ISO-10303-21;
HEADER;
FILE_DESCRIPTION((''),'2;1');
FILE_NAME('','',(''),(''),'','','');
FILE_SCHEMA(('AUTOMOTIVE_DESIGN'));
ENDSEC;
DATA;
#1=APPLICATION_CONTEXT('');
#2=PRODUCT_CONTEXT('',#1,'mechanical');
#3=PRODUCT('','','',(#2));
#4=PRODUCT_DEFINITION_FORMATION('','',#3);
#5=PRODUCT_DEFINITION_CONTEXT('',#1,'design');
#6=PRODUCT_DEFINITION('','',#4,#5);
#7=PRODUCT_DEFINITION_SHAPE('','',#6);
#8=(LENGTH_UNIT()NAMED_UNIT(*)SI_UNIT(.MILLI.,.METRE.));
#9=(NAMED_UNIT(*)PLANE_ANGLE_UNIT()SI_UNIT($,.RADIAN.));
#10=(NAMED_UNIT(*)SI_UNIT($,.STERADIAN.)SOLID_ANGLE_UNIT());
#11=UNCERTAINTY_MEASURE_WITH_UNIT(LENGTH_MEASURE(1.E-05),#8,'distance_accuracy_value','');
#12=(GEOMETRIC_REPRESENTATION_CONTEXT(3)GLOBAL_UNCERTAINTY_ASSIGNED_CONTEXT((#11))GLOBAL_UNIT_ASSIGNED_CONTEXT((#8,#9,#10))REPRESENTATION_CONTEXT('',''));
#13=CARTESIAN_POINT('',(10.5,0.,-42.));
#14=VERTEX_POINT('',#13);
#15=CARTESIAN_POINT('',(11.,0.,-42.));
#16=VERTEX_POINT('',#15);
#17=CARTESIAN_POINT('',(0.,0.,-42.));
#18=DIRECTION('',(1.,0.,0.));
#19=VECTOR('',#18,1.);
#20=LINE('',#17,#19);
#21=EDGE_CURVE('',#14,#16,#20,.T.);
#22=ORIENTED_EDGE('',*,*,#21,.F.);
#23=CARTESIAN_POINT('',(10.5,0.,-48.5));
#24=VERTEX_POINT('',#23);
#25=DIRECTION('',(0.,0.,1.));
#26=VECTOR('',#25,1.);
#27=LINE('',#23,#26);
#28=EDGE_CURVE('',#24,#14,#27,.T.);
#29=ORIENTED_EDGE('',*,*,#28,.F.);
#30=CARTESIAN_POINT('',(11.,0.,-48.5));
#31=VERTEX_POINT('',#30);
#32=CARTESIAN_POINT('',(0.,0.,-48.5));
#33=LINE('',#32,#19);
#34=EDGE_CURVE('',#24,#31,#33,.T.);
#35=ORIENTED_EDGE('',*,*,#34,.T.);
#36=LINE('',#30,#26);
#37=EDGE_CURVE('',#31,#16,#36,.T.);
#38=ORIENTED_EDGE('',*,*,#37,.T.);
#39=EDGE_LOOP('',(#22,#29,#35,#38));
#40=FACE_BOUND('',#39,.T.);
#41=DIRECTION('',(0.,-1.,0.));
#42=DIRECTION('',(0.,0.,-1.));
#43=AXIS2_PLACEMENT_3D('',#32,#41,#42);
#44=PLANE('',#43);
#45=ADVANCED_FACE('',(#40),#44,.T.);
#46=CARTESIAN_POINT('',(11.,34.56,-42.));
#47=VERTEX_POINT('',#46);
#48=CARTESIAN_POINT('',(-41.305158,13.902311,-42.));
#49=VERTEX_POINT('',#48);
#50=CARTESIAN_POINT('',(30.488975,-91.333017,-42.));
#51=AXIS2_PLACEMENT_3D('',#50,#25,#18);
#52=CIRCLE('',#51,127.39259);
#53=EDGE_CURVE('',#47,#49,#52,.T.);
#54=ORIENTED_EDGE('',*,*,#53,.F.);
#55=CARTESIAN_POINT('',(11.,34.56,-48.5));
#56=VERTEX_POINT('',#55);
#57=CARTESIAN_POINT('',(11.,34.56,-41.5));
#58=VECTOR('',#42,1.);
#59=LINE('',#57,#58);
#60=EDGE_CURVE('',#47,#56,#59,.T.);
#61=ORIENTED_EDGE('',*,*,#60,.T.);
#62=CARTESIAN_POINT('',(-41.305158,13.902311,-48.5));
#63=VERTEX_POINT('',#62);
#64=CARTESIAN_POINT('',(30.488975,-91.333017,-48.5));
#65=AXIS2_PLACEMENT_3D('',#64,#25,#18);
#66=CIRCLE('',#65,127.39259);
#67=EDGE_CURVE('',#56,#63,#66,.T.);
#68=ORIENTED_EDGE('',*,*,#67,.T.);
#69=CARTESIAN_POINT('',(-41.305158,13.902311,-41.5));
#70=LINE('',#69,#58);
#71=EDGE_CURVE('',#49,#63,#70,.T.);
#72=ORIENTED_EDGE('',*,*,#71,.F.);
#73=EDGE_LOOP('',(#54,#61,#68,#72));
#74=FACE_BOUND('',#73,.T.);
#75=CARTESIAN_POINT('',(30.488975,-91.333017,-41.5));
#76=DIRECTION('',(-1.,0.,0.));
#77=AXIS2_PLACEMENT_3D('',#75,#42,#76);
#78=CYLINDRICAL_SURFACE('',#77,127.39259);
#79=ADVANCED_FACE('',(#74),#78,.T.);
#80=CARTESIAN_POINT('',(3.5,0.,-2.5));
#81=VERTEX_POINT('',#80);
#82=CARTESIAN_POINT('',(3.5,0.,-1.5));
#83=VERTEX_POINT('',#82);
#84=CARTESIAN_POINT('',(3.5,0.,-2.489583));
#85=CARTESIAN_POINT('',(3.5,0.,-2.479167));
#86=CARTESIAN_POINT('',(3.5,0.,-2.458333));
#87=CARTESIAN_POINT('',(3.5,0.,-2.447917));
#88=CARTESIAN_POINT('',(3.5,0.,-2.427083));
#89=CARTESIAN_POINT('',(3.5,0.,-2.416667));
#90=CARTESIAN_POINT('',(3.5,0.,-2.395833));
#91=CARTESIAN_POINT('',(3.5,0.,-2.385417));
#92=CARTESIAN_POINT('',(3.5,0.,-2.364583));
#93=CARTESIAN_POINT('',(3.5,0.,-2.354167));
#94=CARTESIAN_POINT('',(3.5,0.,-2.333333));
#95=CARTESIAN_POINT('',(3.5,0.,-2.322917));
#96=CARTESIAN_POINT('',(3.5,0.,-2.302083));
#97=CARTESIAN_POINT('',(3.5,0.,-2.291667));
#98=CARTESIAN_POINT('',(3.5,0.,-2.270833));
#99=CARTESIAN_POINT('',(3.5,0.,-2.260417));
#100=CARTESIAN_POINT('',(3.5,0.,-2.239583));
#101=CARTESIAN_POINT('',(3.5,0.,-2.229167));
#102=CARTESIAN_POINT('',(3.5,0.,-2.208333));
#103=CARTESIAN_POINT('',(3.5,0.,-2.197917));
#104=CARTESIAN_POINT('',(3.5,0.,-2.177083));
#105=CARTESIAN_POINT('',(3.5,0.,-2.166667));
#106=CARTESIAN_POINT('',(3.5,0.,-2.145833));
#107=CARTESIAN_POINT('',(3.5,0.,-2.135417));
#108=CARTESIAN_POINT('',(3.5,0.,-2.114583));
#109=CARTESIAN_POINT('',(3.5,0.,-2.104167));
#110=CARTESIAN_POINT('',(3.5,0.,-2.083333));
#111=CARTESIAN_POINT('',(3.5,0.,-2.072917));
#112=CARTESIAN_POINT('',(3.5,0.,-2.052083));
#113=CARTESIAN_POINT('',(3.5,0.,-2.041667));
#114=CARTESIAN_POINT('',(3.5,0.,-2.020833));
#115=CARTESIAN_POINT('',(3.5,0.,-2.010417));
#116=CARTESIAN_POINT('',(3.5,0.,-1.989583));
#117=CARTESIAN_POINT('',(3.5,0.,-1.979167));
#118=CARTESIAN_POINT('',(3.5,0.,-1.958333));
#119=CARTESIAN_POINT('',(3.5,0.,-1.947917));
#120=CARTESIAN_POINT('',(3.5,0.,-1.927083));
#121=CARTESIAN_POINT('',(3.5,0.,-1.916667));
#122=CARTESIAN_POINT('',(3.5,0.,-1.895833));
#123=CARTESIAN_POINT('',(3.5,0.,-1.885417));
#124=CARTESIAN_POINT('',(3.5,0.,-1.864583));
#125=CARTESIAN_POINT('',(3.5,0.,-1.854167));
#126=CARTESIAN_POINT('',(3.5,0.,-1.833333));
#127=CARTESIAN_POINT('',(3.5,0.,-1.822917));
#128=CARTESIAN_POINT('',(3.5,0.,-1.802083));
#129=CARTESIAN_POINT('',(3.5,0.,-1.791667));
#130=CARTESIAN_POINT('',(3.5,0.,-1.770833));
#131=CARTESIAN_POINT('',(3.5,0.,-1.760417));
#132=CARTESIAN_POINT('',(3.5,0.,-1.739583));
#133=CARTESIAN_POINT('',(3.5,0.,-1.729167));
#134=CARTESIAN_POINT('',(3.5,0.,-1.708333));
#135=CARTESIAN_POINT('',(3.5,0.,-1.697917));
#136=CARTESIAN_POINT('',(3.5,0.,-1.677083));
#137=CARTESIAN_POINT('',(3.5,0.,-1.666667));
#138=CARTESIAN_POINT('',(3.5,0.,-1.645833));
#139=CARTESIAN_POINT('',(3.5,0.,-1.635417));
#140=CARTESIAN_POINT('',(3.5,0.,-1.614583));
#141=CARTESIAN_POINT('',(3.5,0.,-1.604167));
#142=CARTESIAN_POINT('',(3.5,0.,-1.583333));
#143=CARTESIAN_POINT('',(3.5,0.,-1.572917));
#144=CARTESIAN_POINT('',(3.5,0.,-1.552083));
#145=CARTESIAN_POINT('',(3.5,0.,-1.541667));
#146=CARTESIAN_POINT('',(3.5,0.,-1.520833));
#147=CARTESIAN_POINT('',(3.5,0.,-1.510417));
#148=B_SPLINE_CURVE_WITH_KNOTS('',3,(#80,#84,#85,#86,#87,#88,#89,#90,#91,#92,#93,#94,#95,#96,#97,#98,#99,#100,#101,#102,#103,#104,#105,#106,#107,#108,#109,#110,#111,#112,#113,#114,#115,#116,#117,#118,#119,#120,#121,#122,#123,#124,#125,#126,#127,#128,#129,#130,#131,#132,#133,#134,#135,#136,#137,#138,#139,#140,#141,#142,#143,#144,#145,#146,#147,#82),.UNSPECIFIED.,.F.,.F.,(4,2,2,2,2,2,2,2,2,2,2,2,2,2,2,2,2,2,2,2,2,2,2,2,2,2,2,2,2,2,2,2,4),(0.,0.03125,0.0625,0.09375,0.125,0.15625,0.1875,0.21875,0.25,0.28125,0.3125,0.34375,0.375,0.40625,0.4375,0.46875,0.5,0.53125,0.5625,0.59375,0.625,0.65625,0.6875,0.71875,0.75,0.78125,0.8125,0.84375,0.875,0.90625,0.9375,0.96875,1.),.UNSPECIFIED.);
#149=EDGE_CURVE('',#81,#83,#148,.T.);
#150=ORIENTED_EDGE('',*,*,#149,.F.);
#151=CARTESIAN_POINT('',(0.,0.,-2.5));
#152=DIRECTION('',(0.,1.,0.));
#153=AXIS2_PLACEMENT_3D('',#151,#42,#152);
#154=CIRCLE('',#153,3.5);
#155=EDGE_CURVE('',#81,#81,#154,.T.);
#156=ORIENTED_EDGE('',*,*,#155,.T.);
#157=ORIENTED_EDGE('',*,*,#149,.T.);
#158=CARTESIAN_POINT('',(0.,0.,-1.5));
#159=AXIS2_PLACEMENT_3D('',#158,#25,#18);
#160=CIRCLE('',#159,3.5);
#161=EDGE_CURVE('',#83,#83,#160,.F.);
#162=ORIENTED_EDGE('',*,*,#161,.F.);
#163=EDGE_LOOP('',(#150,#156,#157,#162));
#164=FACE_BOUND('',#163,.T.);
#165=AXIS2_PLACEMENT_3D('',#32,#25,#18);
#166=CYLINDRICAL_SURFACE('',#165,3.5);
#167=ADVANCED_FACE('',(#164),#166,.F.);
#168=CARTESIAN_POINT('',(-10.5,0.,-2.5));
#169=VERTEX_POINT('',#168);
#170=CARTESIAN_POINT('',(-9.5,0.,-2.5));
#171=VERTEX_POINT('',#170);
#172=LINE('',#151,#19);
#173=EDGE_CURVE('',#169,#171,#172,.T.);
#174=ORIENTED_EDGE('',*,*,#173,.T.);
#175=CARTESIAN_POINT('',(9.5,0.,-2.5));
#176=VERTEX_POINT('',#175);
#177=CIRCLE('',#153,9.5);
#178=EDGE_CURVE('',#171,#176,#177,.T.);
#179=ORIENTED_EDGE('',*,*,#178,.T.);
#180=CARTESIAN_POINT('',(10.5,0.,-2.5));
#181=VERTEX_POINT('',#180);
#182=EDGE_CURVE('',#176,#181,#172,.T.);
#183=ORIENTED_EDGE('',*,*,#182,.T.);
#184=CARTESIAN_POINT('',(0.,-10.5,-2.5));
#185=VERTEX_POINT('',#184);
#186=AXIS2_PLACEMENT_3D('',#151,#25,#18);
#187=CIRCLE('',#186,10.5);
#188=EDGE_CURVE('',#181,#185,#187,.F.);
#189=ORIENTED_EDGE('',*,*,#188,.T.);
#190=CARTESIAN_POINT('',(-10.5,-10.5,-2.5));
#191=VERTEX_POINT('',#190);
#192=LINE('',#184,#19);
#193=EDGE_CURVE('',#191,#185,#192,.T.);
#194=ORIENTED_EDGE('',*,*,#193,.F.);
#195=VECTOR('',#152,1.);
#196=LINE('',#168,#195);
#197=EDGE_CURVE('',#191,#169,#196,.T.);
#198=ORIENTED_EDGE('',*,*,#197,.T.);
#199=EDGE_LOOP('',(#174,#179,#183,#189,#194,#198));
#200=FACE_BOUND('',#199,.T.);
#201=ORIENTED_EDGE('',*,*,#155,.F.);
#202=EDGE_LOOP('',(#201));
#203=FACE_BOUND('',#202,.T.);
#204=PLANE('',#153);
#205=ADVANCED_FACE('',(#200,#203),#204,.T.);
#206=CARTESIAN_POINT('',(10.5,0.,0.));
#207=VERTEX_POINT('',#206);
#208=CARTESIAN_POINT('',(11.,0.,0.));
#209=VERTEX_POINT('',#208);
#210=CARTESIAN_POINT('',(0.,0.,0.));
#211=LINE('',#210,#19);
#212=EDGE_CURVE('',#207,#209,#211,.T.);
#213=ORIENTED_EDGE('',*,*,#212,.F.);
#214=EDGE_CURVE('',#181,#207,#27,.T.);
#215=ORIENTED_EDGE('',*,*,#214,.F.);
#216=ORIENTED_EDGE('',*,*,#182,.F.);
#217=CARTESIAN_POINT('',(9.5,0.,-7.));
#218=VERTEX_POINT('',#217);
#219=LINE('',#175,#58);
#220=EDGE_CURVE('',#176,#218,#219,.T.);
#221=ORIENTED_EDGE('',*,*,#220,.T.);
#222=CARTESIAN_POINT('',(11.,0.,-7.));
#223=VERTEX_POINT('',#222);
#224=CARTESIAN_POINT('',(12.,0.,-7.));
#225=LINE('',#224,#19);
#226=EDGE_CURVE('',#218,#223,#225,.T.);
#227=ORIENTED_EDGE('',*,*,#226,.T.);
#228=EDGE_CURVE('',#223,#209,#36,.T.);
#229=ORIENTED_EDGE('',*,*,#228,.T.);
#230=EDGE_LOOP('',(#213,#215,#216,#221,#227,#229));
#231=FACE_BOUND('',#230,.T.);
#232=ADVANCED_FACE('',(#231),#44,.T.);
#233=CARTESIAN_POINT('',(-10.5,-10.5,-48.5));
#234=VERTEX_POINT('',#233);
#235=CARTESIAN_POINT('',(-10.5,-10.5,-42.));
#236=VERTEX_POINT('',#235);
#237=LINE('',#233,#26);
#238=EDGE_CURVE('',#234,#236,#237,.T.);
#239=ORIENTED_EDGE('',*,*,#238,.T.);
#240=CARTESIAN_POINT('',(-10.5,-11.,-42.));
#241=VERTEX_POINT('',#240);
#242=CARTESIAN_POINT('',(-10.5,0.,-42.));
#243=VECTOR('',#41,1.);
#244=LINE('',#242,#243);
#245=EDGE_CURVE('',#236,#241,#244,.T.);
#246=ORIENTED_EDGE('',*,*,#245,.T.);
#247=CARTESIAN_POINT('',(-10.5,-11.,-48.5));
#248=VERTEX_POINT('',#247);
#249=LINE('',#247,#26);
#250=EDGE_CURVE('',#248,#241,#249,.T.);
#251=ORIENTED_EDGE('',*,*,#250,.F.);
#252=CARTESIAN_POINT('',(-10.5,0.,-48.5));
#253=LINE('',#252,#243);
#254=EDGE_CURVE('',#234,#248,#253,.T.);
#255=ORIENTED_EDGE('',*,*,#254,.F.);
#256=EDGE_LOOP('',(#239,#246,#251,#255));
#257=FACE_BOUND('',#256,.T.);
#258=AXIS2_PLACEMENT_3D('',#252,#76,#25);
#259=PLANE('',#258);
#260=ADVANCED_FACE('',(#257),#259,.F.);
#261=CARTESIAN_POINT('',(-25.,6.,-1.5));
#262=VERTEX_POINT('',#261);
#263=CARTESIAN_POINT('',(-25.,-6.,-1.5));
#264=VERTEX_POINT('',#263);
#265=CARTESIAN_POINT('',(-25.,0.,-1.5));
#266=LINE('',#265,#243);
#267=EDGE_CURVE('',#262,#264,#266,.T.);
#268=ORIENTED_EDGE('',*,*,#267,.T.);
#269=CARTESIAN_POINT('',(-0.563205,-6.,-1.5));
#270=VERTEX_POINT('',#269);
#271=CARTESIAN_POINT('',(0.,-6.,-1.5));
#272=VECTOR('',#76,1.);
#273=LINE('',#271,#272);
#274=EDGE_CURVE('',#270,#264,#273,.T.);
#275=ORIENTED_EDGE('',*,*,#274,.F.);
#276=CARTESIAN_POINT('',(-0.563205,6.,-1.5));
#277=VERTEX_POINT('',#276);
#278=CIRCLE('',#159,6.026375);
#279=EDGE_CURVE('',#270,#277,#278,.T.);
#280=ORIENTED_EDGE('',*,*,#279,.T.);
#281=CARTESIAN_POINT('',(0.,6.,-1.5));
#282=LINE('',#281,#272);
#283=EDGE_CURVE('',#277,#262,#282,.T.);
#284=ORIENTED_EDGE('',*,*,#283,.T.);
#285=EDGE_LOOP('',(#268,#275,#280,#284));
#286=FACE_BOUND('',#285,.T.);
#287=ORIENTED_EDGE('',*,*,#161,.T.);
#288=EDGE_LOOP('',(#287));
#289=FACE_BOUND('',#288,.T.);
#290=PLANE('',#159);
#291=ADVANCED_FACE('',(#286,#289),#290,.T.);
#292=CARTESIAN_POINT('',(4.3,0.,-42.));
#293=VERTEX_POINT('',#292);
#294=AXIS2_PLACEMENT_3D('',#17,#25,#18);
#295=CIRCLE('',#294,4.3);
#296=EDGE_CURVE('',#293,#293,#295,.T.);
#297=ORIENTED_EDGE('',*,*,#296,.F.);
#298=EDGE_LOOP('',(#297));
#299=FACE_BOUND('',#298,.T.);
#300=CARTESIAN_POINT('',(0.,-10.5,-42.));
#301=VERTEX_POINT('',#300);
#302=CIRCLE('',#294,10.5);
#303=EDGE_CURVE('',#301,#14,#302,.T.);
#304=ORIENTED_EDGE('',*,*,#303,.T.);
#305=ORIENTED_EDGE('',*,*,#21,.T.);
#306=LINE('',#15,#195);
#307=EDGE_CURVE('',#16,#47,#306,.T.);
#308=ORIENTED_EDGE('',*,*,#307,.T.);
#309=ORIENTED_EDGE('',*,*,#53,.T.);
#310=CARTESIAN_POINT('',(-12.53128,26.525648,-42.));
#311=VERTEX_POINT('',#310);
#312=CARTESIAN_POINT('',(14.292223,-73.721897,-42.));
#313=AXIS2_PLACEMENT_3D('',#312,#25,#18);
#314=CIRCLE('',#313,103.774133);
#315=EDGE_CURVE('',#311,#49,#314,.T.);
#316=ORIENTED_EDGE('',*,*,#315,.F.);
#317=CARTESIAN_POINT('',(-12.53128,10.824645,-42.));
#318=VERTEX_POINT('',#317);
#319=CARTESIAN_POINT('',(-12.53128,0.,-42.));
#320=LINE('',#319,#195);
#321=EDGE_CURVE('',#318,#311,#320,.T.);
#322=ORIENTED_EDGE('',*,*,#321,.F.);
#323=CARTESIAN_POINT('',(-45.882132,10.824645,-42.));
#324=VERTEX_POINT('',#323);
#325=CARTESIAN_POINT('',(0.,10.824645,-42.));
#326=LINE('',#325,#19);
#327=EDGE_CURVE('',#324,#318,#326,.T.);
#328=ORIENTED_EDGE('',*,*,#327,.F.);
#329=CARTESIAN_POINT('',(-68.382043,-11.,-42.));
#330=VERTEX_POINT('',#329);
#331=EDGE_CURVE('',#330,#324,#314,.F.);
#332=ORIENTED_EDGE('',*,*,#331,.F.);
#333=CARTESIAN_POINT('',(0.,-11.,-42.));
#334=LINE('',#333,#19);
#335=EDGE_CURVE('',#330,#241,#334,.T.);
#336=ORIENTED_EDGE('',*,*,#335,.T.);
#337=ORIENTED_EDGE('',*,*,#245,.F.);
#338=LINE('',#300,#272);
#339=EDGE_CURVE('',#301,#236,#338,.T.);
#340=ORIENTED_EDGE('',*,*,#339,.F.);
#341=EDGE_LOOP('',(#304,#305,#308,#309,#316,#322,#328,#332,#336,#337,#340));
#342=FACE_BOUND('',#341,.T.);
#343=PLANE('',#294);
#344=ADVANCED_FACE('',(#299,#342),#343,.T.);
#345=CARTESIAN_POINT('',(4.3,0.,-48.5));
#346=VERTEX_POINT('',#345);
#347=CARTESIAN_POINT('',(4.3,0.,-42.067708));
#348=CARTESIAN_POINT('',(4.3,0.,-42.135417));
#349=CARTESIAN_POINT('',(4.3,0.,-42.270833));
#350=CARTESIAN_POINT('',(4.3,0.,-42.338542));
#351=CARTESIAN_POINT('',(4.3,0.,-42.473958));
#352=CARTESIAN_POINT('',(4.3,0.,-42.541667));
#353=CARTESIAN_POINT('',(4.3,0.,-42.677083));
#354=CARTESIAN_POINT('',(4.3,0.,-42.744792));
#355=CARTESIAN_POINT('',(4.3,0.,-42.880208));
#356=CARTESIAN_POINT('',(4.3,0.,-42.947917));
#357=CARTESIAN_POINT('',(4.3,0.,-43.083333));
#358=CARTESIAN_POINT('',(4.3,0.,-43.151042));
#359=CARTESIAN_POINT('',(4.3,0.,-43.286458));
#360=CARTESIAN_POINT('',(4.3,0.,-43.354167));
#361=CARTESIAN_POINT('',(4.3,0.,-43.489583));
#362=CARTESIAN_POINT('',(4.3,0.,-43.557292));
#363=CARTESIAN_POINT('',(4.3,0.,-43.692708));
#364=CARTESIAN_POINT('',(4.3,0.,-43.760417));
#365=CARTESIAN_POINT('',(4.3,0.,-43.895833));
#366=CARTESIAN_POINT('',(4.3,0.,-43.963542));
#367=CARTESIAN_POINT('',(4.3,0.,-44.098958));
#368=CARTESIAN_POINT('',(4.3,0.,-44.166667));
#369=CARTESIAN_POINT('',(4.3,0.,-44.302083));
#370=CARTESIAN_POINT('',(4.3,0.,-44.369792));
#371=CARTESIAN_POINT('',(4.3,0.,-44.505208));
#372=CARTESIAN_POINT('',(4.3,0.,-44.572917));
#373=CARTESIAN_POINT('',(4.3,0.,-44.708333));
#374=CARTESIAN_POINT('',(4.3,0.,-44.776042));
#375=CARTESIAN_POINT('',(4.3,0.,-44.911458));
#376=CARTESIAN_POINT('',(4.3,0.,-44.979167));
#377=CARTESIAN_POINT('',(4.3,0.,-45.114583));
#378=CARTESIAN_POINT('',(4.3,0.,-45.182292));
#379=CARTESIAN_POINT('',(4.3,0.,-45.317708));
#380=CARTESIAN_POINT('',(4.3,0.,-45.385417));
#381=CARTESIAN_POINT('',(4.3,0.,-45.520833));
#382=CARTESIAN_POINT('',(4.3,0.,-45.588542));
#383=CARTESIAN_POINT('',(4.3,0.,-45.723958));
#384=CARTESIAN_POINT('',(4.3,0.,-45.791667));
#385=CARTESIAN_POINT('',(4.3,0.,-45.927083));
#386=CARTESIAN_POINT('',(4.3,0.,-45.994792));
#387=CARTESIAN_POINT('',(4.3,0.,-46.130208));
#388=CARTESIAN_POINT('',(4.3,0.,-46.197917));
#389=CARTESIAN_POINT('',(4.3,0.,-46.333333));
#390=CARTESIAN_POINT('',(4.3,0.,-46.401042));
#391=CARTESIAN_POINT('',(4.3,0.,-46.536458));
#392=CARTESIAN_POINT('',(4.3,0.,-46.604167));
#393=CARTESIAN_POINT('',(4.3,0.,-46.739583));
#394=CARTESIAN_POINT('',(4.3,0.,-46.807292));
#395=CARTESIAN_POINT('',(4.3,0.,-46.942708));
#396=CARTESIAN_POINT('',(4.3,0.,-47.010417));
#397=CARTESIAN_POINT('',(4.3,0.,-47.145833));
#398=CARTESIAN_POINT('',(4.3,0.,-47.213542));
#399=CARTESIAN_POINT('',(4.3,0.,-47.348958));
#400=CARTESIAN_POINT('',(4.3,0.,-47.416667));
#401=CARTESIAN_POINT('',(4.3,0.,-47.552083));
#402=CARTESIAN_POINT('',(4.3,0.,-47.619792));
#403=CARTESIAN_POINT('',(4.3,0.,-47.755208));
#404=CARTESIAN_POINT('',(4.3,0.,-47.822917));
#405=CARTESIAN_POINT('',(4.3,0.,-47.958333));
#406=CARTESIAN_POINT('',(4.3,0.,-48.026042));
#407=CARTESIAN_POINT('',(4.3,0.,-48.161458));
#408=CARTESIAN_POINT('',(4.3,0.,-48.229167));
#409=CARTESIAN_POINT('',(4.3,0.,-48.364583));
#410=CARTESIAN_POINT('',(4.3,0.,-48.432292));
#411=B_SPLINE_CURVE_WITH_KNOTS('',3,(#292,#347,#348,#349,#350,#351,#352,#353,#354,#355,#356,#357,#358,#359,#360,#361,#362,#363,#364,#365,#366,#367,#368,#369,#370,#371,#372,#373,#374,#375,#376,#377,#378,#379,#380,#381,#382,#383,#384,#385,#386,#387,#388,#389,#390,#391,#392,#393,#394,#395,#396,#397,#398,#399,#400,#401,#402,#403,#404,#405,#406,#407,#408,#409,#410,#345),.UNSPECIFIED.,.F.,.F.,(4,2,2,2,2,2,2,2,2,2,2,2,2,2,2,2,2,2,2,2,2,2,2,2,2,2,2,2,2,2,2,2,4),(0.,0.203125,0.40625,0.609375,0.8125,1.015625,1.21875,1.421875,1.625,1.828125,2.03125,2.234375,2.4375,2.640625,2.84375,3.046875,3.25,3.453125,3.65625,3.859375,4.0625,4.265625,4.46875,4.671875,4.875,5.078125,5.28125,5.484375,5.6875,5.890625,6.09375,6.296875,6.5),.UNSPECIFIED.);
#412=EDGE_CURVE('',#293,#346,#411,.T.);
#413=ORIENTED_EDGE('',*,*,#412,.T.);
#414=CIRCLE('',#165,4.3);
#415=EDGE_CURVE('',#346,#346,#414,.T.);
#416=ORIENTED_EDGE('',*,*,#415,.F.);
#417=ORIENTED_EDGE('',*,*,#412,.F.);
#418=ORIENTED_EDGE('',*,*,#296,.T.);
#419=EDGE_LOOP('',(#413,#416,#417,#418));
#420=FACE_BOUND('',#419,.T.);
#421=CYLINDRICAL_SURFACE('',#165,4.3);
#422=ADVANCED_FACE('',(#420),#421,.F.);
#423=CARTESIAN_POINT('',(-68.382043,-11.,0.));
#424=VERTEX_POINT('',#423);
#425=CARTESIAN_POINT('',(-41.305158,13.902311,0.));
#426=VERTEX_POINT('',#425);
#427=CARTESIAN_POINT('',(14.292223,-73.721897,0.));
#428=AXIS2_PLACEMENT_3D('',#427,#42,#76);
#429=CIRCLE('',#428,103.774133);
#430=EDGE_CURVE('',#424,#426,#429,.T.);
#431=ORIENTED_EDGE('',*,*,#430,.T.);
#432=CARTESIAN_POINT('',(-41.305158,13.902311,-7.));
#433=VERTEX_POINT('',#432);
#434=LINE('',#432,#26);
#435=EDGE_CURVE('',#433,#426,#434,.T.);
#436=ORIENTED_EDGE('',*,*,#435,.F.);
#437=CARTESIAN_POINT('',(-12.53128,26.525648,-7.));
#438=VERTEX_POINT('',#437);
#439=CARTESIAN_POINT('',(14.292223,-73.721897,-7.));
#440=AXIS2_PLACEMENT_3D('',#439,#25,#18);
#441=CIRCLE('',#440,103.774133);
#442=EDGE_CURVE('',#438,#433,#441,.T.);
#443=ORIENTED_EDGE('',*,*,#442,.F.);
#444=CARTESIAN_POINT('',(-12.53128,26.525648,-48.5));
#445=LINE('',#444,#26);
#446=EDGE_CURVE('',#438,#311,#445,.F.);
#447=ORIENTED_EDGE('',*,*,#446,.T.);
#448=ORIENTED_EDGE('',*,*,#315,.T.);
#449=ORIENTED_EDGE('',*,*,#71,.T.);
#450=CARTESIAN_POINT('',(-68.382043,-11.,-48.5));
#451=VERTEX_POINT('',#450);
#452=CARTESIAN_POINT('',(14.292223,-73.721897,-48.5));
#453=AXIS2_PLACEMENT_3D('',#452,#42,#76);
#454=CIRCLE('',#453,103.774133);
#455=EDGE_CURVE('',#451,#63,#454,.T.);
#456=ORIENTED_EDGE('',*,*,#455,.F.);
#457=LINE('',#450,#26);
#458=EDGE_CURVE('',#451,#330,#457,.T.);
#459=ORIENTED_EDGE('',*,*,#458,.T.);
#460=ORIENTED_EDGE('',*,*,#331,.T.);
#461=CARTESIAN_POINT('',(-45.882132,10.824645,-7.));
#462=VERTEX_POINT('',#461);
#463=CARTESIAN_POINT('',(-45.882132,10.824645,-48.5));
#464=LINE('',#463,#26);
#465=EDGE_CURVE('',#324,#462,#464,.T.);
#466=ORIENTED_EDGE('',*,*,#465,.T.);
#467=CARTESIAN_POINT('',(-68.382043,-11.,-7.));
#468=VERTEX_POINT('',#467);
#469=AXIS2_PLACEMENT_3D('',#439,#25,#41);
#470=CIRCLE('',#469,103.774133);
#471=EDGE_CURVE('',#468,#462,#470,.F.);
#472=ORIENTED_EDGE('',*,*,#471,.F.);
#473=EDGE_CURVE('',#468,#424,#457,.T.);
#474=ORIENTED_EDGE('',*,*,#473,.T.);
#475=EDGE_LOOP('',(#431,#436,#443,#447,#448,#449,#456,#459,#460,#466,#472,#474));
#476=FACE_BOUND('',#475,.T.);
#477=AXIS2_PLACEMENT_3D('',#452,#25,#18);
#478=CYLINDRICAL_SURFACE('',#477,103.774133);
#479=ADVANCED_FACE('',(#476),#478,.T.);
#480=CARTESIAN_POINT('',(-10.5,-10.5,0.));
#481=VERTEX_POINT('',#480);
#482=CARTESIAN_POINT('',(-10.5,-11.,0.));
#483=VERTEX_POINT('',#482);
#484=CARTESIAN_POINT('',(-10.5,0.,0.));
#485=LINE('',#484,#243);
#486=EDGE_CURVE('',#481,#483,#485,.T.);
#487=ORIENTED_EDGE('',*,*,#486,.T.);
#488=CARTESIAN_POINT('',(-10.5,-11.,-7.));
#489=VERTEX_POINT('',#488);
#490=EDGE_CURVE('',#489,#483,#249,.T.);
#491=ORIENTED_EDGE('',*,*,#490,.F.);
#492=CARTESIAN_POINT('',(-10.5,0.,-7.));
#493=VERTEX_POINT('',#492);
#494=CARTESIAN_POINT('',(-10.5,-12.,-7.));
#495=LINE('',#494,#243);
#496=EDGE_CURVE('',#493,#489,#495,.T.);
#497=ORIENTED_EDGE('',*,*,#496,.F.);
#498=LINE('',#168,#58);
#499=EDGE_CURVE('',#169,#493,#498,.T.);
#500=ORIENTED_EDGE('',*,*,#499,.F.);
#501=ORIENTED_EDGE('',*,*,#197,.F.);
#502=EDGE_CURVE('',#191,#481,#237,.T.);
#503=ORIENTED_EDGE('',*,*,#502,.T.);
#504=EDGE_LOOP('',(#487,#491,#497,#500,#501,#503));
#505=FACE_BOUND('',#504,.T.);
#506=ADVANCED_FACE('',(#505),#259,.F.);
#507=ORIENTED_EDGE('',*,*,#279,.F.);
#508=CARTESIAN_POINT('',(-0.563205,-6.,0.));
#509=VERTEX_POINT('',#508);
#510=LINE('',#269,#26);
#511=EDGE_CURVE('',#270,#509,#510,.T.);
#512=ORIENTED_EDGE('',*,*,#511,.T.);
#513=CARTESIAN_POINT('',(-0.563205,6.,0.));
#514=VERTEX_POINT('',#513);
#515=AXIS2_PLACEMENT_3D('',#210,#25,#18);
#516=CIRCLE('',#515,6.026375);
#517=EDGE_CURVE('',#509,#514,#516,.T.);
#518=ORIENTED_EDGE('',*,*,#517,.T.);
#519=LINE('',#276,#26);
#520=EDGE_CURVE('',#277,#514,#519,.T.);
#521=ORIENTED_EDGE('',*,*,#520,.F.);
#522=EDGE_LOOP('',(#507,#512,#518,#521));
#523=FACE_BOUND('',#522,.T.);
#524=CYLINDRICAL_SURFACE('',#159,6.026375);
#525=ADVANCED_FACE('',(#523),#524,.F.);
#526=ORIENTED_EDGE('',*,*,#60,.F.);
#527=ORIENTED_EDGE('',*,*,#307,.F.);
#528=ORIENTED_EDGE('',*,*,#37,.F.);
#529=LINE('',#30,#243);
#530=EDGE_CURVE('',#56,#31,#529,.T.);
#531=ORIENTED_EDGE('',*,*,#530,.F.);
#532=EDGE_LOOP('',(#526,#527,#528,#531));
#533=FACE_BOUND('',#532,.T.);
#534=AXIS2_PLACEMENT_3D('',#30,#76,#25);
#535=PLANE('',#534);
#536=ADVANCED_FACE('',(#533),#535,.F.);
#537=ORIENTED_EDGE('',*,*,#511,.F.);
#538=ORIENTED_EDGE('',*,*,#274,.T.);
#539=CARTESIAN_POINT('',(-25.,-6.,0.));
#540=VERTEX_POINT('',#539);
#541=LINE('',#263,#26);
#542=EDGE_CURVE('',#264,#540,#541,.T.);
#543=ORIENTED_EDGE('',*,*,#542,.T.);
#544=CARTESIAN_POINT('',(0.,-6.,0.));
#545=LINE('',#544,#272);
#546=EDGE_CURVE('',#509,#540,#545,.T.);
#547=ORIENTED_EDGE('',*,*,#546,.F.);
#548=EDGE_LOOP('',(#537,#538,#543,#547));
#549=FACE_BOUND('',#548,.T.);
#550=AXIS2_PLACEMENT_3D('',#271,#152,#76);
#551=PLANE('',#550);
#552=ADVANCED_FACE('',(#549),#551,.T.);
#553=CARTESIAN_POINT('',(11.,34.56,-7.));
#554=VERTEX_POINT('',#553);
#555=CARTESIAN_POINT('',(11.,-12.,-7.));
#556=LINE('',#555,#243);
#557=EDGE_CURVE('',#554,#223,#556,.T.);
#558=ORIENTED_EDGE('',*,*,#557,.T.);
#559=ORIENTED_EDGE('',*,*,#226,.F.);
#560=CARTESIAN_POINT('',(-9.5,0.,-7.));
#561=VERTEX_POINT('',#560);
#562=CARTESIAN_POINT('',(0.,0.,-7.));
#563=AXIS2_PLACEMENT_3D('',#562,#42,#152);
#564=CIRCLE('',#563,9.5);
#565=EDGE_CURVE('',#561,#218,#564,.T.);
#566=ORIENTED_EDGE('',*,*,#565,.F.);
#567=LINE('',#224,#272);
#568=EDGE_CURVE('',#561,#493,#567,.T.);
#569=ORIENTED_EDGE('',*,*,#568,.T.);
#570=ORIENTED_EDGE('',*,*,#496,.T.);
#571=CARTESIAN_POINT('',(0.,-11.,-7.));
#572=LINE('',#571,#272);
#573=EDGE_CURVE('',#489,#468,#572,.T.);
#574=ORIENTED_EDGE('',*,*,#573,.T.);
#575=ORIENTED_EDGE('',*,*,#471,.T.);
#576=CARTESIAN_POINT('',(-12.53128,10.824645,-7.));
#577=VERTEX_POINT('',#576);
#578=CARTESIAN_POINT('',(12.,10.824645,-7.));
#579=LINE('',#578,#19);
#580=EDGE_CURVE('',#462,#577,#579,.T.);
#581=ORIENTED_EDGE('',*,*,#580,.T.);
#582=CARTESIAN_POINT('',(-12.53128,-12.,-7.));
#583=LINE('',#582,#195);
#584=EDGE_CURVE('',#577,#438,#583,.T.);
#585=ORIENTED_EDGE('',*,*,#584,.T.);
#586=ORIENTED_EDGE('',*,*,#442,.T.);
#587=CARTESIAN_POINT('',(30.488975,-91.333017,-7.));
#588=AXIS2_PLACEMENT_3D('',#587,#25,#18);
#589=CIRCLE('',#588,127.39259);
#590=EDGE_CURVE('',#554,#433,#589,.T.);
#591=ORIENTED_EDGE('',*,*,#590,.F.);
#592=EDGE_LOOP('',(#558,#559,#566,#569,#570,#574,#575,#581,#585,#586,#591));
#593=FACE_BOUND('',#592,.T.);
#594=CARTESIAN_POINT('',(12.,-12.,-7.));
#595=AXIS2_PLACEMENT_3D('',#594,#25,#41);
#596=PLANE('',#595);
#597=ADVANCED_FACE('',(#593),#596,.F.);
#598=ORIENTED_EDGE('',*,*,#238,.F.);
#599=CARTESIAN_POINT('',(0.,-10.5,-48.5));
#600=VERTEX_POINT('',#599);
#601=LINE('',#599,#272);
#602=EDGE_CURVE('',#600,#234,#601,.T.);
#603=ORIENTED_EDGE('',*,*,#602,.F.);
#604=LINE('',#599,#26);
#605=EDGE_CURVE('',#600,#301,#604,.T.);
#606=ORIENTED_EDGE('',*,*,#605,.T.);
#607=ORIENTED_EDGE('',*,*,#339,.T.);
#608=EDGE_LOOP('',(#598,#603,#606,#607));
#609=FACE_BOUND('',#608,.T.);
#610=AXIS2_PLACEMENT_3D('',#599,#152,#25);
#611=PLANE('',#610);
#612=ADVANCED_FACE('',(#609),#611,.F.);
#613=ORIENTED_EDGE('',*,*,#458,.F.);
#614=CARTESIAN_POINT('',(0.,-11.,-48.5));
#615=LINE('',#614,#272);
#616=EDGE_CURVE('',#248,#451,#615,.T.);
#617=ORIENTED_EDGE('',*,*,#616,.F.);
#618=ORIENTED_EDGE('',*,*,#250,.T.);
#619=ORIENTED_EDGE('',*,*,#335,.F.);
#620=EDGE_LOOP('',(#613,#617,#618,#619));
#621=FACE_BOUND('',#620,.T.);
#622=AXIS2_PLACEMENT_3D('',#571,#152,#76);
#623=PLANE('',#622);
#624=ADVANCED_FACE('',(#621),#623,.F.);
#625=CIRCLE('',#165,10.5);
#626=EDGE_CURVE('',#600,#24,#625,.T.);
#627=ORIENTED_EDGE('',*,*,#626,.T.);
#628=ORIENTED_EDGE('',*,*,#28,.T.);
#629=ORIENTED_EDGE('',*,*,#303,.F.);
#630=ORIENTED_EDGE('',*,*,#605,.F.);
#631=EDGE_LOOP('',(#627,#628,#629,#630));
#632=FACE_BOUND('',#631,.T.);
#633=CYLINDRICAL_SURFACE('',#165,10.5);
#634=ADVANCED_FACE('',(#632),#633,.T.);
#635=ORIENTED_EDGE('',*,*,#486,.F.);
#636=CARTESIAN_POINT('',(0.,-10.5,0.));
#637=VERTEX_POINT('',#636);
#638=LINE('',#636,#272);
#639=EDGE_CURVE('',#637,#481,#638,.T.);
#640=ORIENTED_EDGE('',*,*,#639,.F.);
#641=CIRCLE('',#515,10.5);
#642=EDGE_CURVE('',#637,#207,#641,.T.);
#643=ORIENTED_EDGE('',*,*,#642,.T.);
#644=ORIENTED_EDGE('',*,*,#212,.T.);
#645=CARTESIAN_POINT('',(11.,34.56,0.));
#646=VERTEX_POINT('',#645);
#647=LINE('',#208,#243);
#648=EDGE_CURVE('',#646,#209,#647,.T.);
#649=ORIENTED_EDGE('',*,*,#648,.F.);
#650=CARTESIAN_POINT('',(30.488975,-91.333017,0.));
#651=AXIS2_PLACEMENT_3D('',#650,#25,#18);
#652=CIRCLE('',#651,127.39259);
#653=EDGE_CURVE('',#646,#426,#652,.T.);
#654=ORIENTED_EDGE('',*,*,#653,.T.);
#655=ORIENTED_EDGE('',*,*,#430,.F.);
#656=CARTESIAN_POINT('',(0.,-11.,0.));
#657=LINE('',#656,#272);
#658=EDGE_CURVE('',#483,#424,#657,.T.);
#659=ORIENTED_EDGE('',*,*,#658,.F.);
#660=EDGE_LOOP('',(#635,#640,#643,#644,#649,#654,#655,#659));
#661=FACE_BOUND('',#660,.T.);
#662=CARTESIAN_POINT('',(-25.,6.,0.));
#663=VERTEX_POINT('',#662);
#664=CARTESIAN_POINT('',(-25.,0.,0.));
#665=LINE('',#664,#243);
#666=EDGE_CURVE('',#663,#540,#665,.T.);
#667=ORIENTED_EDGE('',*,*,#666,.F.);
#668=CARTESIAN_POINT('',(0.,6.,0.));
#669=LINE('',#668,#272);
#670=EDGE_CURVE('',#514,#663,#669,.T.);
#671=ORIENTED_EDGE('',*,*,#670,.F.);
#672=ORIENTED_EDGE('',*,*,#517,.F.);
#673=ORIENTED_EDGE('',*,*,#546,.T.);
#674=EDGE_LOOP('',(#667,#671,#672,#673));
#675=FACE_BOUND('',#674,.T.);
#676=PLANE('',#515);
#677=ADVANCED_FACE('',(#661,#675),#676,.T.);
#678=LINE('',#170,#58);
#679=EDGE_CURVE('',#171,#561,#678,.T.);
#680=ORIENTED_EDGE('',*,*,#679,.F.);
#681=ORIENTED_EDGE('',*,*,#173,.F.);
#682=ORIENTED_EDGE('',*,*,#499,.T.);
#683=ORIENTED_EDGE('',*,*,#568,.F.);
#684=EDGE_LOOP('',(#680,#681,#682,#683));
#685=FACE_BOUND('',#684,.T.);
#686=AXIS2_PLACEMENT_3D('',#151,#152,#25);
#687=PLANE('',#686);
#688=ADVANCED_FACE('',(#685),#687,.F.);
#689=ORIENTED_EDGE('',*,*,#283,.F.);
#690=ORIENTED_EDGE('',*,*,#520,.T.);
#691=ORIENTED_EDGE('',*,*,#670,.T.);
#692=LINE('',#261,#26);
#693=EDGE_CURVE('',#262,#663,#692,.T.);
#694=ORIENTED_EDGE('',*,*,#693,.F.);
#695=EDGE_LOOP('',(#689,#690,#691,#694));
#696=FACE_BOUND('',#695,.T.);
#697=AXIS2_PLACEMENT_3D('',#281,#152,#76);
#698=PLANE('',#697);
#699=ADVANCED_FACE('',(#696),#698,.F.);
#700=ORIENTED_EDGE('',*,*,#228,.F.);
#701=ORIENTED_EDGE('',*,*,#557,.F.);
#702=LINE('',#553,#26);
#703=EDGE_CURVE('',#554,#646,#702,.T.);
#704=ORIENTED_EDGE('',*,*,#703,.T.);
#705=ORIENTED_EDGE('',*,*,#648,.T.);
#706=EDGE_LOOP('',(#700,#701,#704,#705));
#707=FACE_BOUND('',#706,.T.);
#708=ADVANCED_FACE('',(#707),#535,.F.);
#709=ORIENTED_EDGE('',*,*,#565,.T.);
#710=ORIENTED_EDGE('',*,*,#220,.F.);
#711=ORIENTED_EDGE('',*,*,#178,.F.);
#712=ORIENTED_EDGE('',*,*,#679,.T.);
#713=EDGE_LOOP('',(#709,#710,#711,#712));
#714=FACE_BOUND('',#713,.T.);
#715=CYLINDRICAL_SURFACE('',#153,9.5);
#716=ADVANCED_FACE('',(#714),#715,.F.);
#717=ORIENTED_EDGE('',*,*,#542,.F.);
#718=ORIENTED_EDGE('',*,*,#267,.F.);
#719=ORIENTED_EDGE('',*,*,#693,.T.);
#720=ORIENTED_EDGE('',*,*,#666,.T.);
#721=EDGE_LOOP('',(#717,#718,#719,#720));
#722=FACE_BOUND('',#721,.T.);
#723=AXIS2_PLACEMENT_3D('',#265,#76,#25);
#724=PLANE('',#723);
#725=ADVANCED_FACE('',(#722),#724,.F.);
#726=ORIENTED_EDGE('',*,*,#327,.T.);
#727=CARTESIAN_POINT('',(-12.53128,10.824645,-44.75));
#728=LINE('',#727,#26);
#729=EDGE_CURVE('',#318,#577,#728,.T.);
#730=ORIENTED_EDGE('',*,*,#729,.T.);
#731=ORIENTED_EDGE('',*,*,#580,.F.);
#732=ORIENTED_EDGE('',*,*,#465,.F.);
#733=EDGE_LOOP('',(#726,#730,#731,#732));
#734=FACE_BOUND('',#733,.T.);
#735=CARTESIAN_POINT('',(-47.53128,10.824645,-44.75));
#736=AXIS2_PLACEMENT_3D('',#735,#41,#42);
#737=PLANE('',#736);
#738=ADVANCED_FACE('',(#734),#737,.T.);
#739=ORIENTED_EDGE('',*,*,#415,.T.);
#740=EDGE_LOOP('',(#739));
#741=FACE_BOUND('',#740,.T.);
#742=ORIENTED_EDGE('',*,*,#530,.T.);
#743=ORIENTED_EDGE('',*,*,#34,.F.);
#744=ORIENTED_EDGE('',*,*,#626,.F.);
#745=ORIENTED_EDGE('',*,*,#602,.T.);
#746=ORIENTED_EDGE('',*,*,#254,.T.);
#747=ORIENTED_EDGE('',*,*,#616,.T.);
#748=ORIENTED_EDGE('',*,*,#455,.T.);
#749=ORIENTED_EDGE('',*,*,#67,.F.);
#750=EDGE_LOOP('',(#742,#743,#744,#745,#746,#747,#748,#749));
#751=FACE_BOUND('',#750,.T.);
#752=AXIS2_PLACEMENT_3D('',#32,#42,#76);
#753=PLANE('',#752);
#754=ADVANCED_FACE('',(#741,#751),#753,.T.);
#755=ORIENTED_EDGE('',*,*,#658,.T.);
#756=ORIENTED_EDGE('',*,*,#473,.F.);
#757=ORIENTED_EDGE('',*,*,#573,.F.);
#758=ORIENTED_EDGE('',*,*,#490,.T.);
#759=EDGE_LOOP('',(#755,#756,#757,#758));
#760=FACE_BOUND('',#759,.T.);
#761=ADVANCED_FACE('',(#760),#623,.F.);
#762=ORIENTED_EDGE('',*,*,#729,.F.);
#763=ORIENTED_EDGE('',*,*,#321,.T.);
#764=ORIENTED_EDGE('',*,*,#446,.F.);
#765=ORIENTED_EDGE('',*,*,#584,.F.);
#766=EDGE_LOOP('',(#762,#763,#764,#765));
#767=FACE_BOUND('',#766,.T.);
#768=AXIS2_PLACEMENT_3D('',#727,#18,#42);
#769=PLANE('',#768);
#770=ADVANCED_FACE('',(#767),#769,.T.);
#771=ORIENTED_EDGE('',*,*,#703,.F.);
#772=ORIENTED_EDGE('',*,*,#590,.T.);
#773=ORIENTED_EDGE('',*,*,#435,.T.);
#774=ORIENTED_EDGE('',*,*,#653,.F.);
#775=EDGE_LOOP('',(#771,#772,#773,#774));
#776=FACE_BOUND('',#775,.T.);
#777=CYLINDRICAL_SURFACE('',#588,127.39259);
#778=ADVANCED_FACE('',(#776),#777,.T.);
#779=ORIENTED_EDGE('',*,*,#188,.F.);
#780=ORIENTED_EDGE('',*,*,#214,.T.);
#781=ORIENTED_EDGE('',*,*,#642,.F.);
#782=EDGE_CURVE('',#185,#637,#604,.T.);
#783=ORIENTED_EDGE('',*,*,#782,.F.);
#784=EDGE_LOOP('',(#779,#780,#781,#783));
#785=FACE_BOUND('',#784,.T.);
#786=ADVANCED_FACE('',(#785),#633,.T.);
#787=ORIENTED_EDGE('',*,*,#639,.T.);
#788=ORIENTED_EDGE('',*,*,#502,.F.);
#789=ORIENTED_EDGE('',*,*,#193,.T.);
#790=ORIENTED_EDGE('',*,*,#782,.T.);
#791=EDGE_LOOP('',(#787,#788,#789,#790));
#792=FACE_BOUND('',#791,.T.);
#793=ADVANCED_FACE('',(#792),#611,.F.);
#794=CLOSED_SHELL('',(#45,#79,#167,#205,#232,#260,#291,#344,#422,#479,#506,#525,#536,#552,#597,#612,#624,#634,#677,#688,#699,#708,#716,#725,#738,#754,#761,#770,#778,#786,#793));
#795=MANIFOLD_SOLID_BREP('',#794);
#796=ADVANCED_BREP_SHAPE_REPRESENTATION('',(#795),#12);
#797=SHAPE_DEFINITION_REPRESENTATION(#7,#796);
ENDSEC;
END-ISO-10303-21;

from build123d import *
from build123d.topology import SkipClean

# Parameters (mm, degrees)
SKETCH1_R                 = 9.5
BOSS_EXTRUDE1_DEPTH       = 48
SKETCH2_W                 = 34
SKETCH2_H                 = 30
CUT_EXTRUDE1_DEPTH        = 62.481704596
BOSS_EXTRUDE2_START       = -2.5
SKETCH3_R                 = 9.5
SKETCH3_R_2               = 2.4
BOSS_EXTRUDE2_DEPTH       = 2.5
SKETCH4_R                 = 9.5
SKETCH4_R_2               = 4.2
BOSS_EXTRUDE3_DEPTH       = 7
SKETCH5_R                 = 4.2
BOSS_EXTRUDE4_DEPTH       = 11
BOSS_EXTRUDE5_DEPTH       = 48
CUT_EXTRUDE2_START        = -48
CUT_EXTRUDE2_OUTLINE_R    = 2.65
CUT_EXTRUDE2_DEPTH        = 48
CUT_EXTRUDE3_START        = -4.5
SKETCH8_R                 = 9.5
CUT_EXTRUDE3_DEPTH        = 4.5
SKETCH9_R                 = 6.067807638
CUT_EXTRUDE4_DEPTH        = 4.5
SKETCH10_R                = 9.5
BOSS_EXTRUDE6_DEPTH       = 4.5
SKETCH11_R                = 4.2
BOSS_EXTRUDE7_DEPTH       = 3.5
SKETCH12_R                = 2.4
BOSS_EXTRUDE8_DEPTH       = 2.5
SKETCH13_W                = 35
SKETCH13_H                = 34
CUT_EXTRUDE5_DEPTH        = 14.5
SKETCH15_R                = 3.436413098
BOSS_EXTRUDE9_DEPTH       = 10
BOSS_EXTRUDE10_DEPTH      = 0.5
SKETCH18_R                = 4.2
CUT_EXTRUDE8_DEPTH        = 0.5
CUT_EXTRUDE9_DEPTH        = 69.529190861
BOSS_EXTRUDE11_DEPTH      = 7
CUT_EXTRUDE10_DEPTH       = 99.245865053
BOSS_EXTRUDE12_DEPTH      = 41.5
SKETCH25_R                = 4.2
CUT_EXTRUDE11_DEPTH       = 0.5
CUT_EXTRUDE12_DEPTH       = 99.245865053
BOSS_EXTRUDE13_DEPTH      = 20.5
BOSS_EXTRUDE13_DEPTH_BACK = 20.5
CUT_EXTRUDE14_DEPTH       = 91.289811164
CUT_EXTRUDE15_DEPTH       = 90.647860543
SKETCH31_R                = 2.65
SKETCH31_R_2              = 2.5
BOSS_EXTRUDE14_DEPTH      = 2.5
CUT_EXTRUDE16_DEPTH       = 90.041304074
BOSS_EXTRUDE15_DEPTH      = 7
CUT_EXTRUDE17_DEPTH       = 17.75
CUT_EXTRUDE18_DEPTH       = 21.75
SKETCH38_R                = 4.3
CUT_EXTRUDE20_DEPTH       = 81.365166156
SKETCH39_R                = 3.5
CUT_EXTRUDE21_DEPTH       = 91.679366072
CUT_EXTRUDE22_DEPTH       = 1.5


# Read off the part's stored shape, not the designer's step: Cut-Extrude2
with BuildPart() as part:
    # Sketch1 → Boss-Extrude1 (new body)
    with BuildSketch(Plane.XY):
        with BuildLine():
            Line((-12, 0), (-12, 30))
            Line((-12, 30), (12, 30))
            Line((12, 30), (12, 0))
            ThreePointArc((12, 0), (0, -12), (-12, 0))
        make_face()
        Circle(SKETCH1_R, mode=Mode.SUBTRACT)
    extrude(amount=-BOSS_EXTRUDE1_DEPTH)

    # Sketch2 → Cut-Extrude1 (cut, through all)
    with BuildSketch(Plane.ZY.offset(12)):
        with Locations((-24, 3)):
            Rectangle(SKETCH2_W, SKETCH2_H)
    extrude(amount=-CUT_EXTRUDE1_DEPTH, mode=Mode.SUBTRACT)

    # Sketch3 → Boss-Extrude2 (add)
    with BuildSketch(Plane(origin=(0, 0, -48), x_dir=(-1, 0, 0), z_dir=(0, 0, -1)).offset(BOSS_EXTRUDE2_START)):
        Circle(SKETCH3_R)
        Circle(SKETCH3_R_2, mode=Mode.SUBTRACT)
    extrude(amount=BOSS_EXTRUDE2_DEPTH)

    # Sketch4 → Boss-Extrude3 (add)
    with BuildSketch(Plane.XY):
        with Locations(Location((0, 0, 0), (0, 0, 180))):
            Circle(SKETCH4_R)
        Circle(SKETCH4_R_2, mode=Mode.SUBTRACT)
    extrude(amount=-BOSS_EXTRUDE3_DEPTH)

    # Sketch5 → Boss-Extrude4 (add)
    with BuildSketch(Plane.XY):
        Circle(SKETCH5_R)
    extrude(amount=-BOSS_EXTRUDE4_DEPTH)

    # Sketch6 → Boss-Extrude5 (add)
    with BuildSketch(Plane(origin=(0, 0, -48), x_dir=(-1, 0, 0), z_dir=(0, 0, -1))):
        Polygon((12, 30), (12, 18), (18, 18), (38, 18), (38, 30), align=None)
    extrude(amount=-BOSS_EXTRUDE5_DEPTH)

    # Cut-Extrude2 outline → Cut-Extrude2 (cut)
    with BuildSketch(Plane.XY.offset(CUT_EXTRUDE2_START)):
        Circle(CUT_EXTRUDE2_OUTLINE_R)
    extrude(amount=CUT_EXTRUDE2_DEPTH, mode=Mode.SUBTRACT)

    # Sketch8 → Cut-Extrude3 (cut)
    with BuildSketch(Plane(origin=(0, 0, -7), x_dir=(-1, 0, 0), z_dir=(0, 0, -1)).offset(CUT_EXTRUDE3_START)):
        Circle(SKETCH8_R)
    extrude(amount=CUT_EXTRUDE3_DEPTH, mode=Mode.SUBTRACT)


with BuildPart() as cut_extrude3_piece_1:
    # of the separate pieces the step leaves, piece 1, a body of its own (cut_extrude3_pieces)
    add(part.part.solids().sort_by_distance((-12, 0, 0))[0])

    # Sketch10 → Boss-Extrude6 (add)
    with BuildSketch(Plane.XY.offset(-45.5)):
        with Locations(Location((0, 0, 0), (0, 0, 90))):
            Circle(SKETCH10_R)
    extrude(amount=BOSS_EXTRUDE6_DEPTH)

    # Sketch11 → Boss-Extrude7 (add)
    with BuildSketch(Plane.XY.offset(-41)):
        with Locations(Location((0, 0, 0), (0, 0, 180))):
            Circle(SKETCH11_R)
    extrude(amount=BOSS_EXTRUDE7_DEPTH)

    # Sketch12 → Boss-Extrude8 (add)
    with BuildSketch(Plane(origin=(0, 0, -48), x_dir=(-1, 0, 0), z_dir=(0, 0, -1))):
        Circle(SKETCH12_R)
    extrude(amount=-BOSS_EXTRUDE8_DEPTH)

    # Sketch13 → Cut-Extrude5 (cut)
    with BuildSketch(Plane(origin=(0, 30, 0), x_dir=(1, 0, 0), z_dir=(0, 1, 0))):
        with Locations((-5.5, 24)):
            Rectangle(SKETCH13_W, SKETCH13_H)
    extrude(amount=-CUT_EXTRUDE5_DEPTH, mode=Mode.SUBTRACT)

    # Sketch15 → Boss-Extrude9 (add)
    with BuildSketch(Plane(origin=(0, 0, -48), x_dir=(-1, 0, 0), z_dir=(0, 0, -1))):
        Circle(SKETCH15_R)
    extrude(amount=-BOSS_EXTRUDE9_DEPTH)

    # Sketch16 → Boss-Extrude10 (add)
    with BuildSketch(Plane(origin=(0, 0, -48), x_dir=(-1, 0, 0), z_dir=(0, 0, -1))):
        Polygon((38, 30), (-12, 30), (-12, 18), (12, 18), (38, 18), align=None)
        with BuildLine():
            Line((-12, 0), (12, 0))
            ThreePointArc((12, 0), (0, -12), (-12, 0))
        make_face()
        with BuildLine():
            ThreePointArc((12, 0), (0, 12), (-12, 0))
            Line((-12, 0), (12, 0))
        make_face()
        with BuildLine():
            Line((12, 0), (-12, 0))
            ThreePointArc((-12, 0), (0, -12), (12, 0))
        make_face()
        with BuildLine():
            Line((12, 18), (-12, 18))
            Line((-12, 18), (-12, 0))
            ThreePointArc((-12, 0), (0, 12), (12, 0))
            Line((12, 0), (12, 18))
        make_face()
    extrude(amount=BOSS_EXTRUDE10_DEPTH)

    # Sketch18 → Cut-Extrude8 (cut)
    with SkipClean():  # the faces are left unmerged after this step: merging them gives an invalid solid
        with BuildSketch(Plane.XY.offset(-41)):
            with BuildLine():
                Line((12, 30), (-23, 30))
                Line((-23, 30), (-23, 18))
                Line((-23, 18), (-12, 18))
                Line((-12, 18), (-12, 0))
                ThreePointArc((-12, 0), (0, -12), (12, 0))
                Line((12, 0), (12, 30))
            make_face()
            Circle(SKETCH18_R, mode=Mode.SUBTRACT)
        extrude(amount=-CUT_EXTRUDE8_DEPTH, mode=Mode.SUBTRACT)

    # Sketch19 → Cut-Extrude9 (cut, through all)
    with SkipClean():  # the faces are left unmerged after this step: merging them gives an invalid solid
        with BuildSketch(Plane.XY):
            with BuildLine():
                ThreePointArc((11, 0), (0, -11), (-11, 0))
                Line((-11, 0), (-12, 0))
                ThreePointArc((-12, 0), (0, -12), (12, 0))
                Line((12, 0), (12, 30))
                Line((12, 30), (11, 30))
                Line((11, 30), (11, 0))
            make_face()
        extrude(amount=-CUT_EXTRUDE9_DEPTH, mode=Mode.SUBTRACT)

    # Sketch21 → Boss-Extrude11 (add)
    with SkipClean():  # the faces are left unmerged after this step: merging them gives an invalid solid
        with BuildSketch(Plane.XY):
            with BuildLine():
                Line((-80, -11), (0, -11))
                ThreePointArc((0, -11), (-11, 0), (0, 11))
                Line((0, 11), (0, 29.50098276))
                ThreePointArc((0, 29.50098276), (-43.873330509, 16.901328954), (-80, -11))
            make_face()
        boss_extrude11 = extrude(amount=-BOSS_EXTRUDE11_DEPTH)

    # Mirror2: Boss-Extrude11 across plane
    with SkipClean():  # the faces are left unmerged after this step: merging them gives an invalid solid
        add(boss_extrude11.mirror(Plane.XY.offset(-24.25)))

    # Sketch23 → Cut-Extrude10 (cut, through all)
    with SkipClean():  # the faces are left unmerged after this step: merging them gives an invalid solid
        with BuildSketch(Plane.XY):
            with BuildLine():
                Line((11, 30), (-38, 30))
                Line((-38, 30), (-38, 19.680026504))
                ThreePointArc((-38, 19.680026504), (-14.037481168, 27.392013724), (11, 30))
            make_face()
        extrude(amount=-CUT_EXTRUDE10_DEPTH, mode=Mode.SUBTRACT)

    # Sketch24 → Boss-Extrude12 (add)
    with BuildSketch(Plane.XY):
        with BuildLine():
            ThreePointArc((-23, 25.145323924), (-54.06051883, 11.110516861), (-80, -11))
            Line((-80, -11), (-75.954431576, -11))
            ThreePointArc((-75.954431576, -11), (-51.689916224, 9.05738053), (-23, 22.017084465))
            Line((-23, 22.017084465), (-23, 25.145323924))
        make_face()
    extrude(amount=-BOSS_EXTRUDE12_DEPTH)

    # Sketch25 → Cut-Extrude11 (cut)
    # profile 1 of 4: a face of its own
    with BuildSketch(Plane.XY.offset(-41.5)):
        with BuildLine():
            ThreePointArc((-34.296583622, 18), (-56.696622923, 5.756871838), (-75.954431576, -11))
            Line((-75.954431576, -11), (0, -11))
            ThreePointArc((0, -11), (-7.778174593, 7.778174593), (11, 0))
            Line((11, 0), (11, 27))
            ThreePointArc((11, 27), (-6.181599512, 25.747652826), (-23, 22.017084465))
            Line((-23, 22.017084465), (-23, 18))
            Line((-23, 18), (-34.296583622, 18))
        make_face()
    # profile 2 of 4: a face of its own
    with BuildSketch(Plane.XY.offset(-41.5)):
        with BuildLine():
            ThreePointArc((11, 0), (-7.778174593, 7.778174593), (0, -11))
            ThreePointArc((0, -11), (7.778174593, -7.778174593), (11, 0))
        make_face()
        Circle(SKETCH25_R, mode=Mode.SUBTRACT)
    # profile 3 of 4: a face of its own
    with BuildSketch(Plane.XY.offset(-41.5)):
        with BuildLine():
            Line((-15.831452239, 27), (11, 27))
            Line((11, 27), (11, 30))
            ThreePointArc((11, 30), (-2.499322476, 29.24767055), (-15.831452239, 27))
        make_face()
    # profile 4 of 4: a face of its own
    with BuildSketch(Plane.XY.offset(-41.5)):
        with BuildLine():
            ThreePointArc((-15.831452239, 27), (-19.429859533, 26.127289319), (-23, 25.145323924))
            Line((-23, 25.145323924), (-23, 22.017084465))
            ThreePointArc((-23, 22.017084465), (-6.181599512, 25.747652826), (11, 27))
            Line((11, 27), (-15.831452239, 27))
        make_face()
    extrude(amount=-CUT_EXTRUDE11_DEPTH, mode=Mode.SUBTRACT)

    # Sketch26 → Cut-Extrude12 (cut, through all)
    with BuildSketch(Plane.XY):
        with BuildLine():
            Line((-289.619638312, -11), (-80, -11))
            Line((-80, -11), (-70, -11))
            ThreePointArc((-70, -11), (-34.238011767, 18.860462272), (11, 30))
            Line((11, 30), (220.598190616, 32.998542465))
            Line((220.598190616, 32.998542465), (184.578847054, 450.687634918))
            Line((184.578847054, 450.687634918), (-325.638981874, 406.689092453))
            Line((-325.638981874, 406.689092453), (-289.619638312, -11))
        make_face()
    extrude(amount=-CUT_EXTRUDE12_DEPTH, mode=Mode.SUBTRACT)

    # Sketch27 → Boss-Extrude13 (add, two sides: drawn at the far end of the back side and taken through both)
    with SkipClean():  # the faces are left unmerged after this step: merging them gives an invalid solid
        with BuildSketch(Plane.XY.offset(-24.25).offset(-BOSS_EXTRUDE13_DEPTH_BACK)):
            with BuildLine():
                Line((-47.531279655, 10.824644679), (-12.531279655, 10.824644679))
                Line((-12.531279655, 10.824644679), (-12.531279655, 26.941493444))
                ThreePointArc((-12.531279655, 26.941493444), (-30.78831932, 20.527086985), (-47.531279655, 10.824644679))
            make_face()
        extrude(amount=BOSS_EXTRUDE13_DEPTH + BOSS_EXTRUDE13_DEPTH_BACK)

    # Sketch28 → Cut-Extrude14 (cut, through all)
    with BuildSketch(Plane.XY):
        with BuildLine():
            ThreePointArc((11, 30), (-34.238011767, 18.860462272), (-70, -11))
            Line((-70, -11), (-69.17, -11))
            ThreePointArc((-69.17, -11), (-33.867981255, 18.852478225), (11, 30))
        make_face()
    extrude(amount=-CUT_EXTRUDE14_DEPTH, mode=Mode.SUBTRACT)

    # Sketch30 → Cut-Extrude15 (cut, through all)
    with BuildSketch(Plane.XY):
        with BuildLine():
            Line((-69.17, -11), (-68.382043193, -11))
            ThreePointArc((-68.382043193, -11), (-33.329298575, 18.480387889), (11, 30))
            ThreePointArc((11, 30), (-33.867981255, 18.852478225), (-69.17, -11))
        make_face()
    extrude(amount=-CUT_EXTRUDE15_DEPTH, mode=Mode.SUBTRACT)

    # Sketch31 → Boss-Extrude14 (add)
    with BuildSketch(Plane.XY):
        Circle(SKETCH31_R)
        Circle(SKETCH31_R_2, mode=Mode.SUBTRACT)
    extrude(amount=-BOSS_EXTRUDE14_DEPTH)

    # Sketch32 → Cut-Extrude16 (cut, through all)
    with BuildSketch(Plane.XY):
        with BuildLine():
            Line((0, -10.5), (-10.5, -10.5))
            Line((-10.5, -10.5), (-10.5, -11))
            Line((-10.5, -11), (0, -11))
            ThreePointArc((0, -11), (7.778174593, -7.778174593), (11, 0))
            Line((11, 0), (10.5, 0))
            ThreePointArc((10.5, 0), (7.424621202, -7.424621202), (0, -10.5))
        make_face()
    extrude(amount=-CUT_EXTRUDE16_DEPTH, mode=Mode.SUBTRACT)

    # Sketch33 → Boss-Extrude15 (add)
    with BuildSketch(Plane.XY):
        with BuildLine():
            Line((11, 30), (11, 34.56))
            ThreePointArc((11, 34.56), (-16.306713668, 27.153418453), (-41.30515803, 13.902311291))
            ThreePointArc((-41.30515803, 13.902311291), (-16.232852944, 25.461218463), (11, 30))
        make_face()
    boss_extrude15 = extrude(amount=-BOSS_EXTRUDE15_DEPTH)

    # Mirror3: Boss-Extrude15 across plane
    add(boss_extrude15.mirror(Plane.XY.offset(-24.25)))

    # Sketch34 → Cut-Extrude17 (cut)
    with BuildSketch(Plane.XY.offset(-24.25)):
        with BuildLine():
            Line((11, 30), (11, 34.56))
            ThreePointArc((11, 34.56), (-16.306713668, 27.153418453), (-41.30515803, 13.902311291))
            ThreePointArc((-41.30515803, 13.902311291), (-27.398755364, 21.309324072), (-12.531279655, 26.525648402))
            ThreePointArc((-12.531279655, 26.525648402), (-0.865514718, 28.939262351), (11, 30))
        make_face()
    extrude(amount=-CUT_EXTRUDE17_DEPTH, mode=Mode.SUBTRACT)

    # Sketch37 → Cut-Extrude18 (cut)
    with BuildSketch(Plane.XY.offset(-24.25)):
        with BuildLine():
            Line((-10.5, 0), (-10.5, -10.5))
            Line((-10.5, -10.5), (0, -10.5))
            ThreePointArc((0, -10.5), (7.424621202, -7.424621202), (10.5, 0))
            Line((10.5, 0), (9.5, 0))
            ThreePointArc((9.5, 0), (0, -9.5), (-9.5, 0))
            Line((-9.5, 0), (-10.5, 0))
        make_face()
        with BuildLine():
            ThreePointArc((10.5, 0), (7.424621202, -7.424621202), (0, -10.5))
            Line((0, -10.5), (11, -10.5))
            Line((11, -10.5), (11, 0))
            Line((11, 0), (10.5, 0))
        make_face()
    extrude(amount=CUT_EXTRUDE18_DEPTH, mode=Mode.SUBTRACT)

    # Sketch38 → Cut-Extrude20 (cut, through all)
    with BuildSketch(Plane.XY.offset(-24.25)):
        Circle(SKETCH38_R)
    extrude(amount=-CUT_EXTRUDE20_DEPTH, mode=Mode.SUBTRACT)

    # Sketch39 → Cut-Extrude21 (cut, through all)
    with BuildSketch(Plane.XY):
        Circle(SKETCH39_R)
    extrude(amount=-CUT_EXTRUDE21_DEPTH, mode=Mode.SUBTRACT)

    # Sketch40 → Cut-Extrude22 (cut)
    with BuildSketch(Plane.XY):
        with BuildLine():
            ThreePointArc((-0.563204585, -6), (-6.026375312, 0), (-0.563204585, 6))
            Line((-0.563204585, 6), (-25, 6))
            Line((-25, 6), (-25, -6))
            Line((-25, -6), (-0.563204585, -6))
        make_face()
        with BuildLine():
            Line((0, 3.5), (0, 6))
            Line((0, 6), (-0.563204585, 6))
            ThreePointArc((-0.563204585, 6), (-6.026375312, 0), (-0.563204585, -6))
            Line((-0.563204585, -6), (0, -6))
            Line((0, -6), (0, -3.5))
            ThreePointArc((0, -3.5), (-3.5, 0), (0, 3.5))
        make_face()
        with BuildLine():
            Line((-0.563204585, 6), (0, 6))
            Line((0, 6), (0, 3.5))
            ThreePointArc((0, 3.5), (2.474873734, 2.474873734), (3.5, 0))
            ThreePointArc((3.5, 0), (2.474873734, -2.474873734), (0, -3.5))
            Line((0, -3.5), (0, -6))
            Line((0, -6), (-0.563204585, -6))
            ThreePointArc((-0.563204585, -6), (4.057284634, -4.455966877), (6.026375312, 0))
            ThreePointArc((6.026375312, 0), (4.057284634, 4.455966877), (-0.563204585, 6))
        make_face()
    extrude(amount=-CUT_EXTRUDE22_DEPTH, mode=Mode.SUBTRACT)


with BuildPart() as cut_extrude3_piece_2:
    # of the separate pieces the step leaves, piece 2, a body of its own (cut_extrude3_pieces)
    add(part.part.solids().sort_by_distance((4.2, 0, -7))[0])

    # Sketch9 → Cut-Extrude4 (cut)
    with BuildSketch(Plane(origin=(0, 0, -11), x_dir=(-1, 0, 0), z_dir=(0, 0, -1))):
        Circle(SKETCH9_R)
    extrude(amount=-CUT_EXTRUDE4_DEPTH, mode=Mode.SUBTRACT)


solid = cut_extrude3_piece_1.part
